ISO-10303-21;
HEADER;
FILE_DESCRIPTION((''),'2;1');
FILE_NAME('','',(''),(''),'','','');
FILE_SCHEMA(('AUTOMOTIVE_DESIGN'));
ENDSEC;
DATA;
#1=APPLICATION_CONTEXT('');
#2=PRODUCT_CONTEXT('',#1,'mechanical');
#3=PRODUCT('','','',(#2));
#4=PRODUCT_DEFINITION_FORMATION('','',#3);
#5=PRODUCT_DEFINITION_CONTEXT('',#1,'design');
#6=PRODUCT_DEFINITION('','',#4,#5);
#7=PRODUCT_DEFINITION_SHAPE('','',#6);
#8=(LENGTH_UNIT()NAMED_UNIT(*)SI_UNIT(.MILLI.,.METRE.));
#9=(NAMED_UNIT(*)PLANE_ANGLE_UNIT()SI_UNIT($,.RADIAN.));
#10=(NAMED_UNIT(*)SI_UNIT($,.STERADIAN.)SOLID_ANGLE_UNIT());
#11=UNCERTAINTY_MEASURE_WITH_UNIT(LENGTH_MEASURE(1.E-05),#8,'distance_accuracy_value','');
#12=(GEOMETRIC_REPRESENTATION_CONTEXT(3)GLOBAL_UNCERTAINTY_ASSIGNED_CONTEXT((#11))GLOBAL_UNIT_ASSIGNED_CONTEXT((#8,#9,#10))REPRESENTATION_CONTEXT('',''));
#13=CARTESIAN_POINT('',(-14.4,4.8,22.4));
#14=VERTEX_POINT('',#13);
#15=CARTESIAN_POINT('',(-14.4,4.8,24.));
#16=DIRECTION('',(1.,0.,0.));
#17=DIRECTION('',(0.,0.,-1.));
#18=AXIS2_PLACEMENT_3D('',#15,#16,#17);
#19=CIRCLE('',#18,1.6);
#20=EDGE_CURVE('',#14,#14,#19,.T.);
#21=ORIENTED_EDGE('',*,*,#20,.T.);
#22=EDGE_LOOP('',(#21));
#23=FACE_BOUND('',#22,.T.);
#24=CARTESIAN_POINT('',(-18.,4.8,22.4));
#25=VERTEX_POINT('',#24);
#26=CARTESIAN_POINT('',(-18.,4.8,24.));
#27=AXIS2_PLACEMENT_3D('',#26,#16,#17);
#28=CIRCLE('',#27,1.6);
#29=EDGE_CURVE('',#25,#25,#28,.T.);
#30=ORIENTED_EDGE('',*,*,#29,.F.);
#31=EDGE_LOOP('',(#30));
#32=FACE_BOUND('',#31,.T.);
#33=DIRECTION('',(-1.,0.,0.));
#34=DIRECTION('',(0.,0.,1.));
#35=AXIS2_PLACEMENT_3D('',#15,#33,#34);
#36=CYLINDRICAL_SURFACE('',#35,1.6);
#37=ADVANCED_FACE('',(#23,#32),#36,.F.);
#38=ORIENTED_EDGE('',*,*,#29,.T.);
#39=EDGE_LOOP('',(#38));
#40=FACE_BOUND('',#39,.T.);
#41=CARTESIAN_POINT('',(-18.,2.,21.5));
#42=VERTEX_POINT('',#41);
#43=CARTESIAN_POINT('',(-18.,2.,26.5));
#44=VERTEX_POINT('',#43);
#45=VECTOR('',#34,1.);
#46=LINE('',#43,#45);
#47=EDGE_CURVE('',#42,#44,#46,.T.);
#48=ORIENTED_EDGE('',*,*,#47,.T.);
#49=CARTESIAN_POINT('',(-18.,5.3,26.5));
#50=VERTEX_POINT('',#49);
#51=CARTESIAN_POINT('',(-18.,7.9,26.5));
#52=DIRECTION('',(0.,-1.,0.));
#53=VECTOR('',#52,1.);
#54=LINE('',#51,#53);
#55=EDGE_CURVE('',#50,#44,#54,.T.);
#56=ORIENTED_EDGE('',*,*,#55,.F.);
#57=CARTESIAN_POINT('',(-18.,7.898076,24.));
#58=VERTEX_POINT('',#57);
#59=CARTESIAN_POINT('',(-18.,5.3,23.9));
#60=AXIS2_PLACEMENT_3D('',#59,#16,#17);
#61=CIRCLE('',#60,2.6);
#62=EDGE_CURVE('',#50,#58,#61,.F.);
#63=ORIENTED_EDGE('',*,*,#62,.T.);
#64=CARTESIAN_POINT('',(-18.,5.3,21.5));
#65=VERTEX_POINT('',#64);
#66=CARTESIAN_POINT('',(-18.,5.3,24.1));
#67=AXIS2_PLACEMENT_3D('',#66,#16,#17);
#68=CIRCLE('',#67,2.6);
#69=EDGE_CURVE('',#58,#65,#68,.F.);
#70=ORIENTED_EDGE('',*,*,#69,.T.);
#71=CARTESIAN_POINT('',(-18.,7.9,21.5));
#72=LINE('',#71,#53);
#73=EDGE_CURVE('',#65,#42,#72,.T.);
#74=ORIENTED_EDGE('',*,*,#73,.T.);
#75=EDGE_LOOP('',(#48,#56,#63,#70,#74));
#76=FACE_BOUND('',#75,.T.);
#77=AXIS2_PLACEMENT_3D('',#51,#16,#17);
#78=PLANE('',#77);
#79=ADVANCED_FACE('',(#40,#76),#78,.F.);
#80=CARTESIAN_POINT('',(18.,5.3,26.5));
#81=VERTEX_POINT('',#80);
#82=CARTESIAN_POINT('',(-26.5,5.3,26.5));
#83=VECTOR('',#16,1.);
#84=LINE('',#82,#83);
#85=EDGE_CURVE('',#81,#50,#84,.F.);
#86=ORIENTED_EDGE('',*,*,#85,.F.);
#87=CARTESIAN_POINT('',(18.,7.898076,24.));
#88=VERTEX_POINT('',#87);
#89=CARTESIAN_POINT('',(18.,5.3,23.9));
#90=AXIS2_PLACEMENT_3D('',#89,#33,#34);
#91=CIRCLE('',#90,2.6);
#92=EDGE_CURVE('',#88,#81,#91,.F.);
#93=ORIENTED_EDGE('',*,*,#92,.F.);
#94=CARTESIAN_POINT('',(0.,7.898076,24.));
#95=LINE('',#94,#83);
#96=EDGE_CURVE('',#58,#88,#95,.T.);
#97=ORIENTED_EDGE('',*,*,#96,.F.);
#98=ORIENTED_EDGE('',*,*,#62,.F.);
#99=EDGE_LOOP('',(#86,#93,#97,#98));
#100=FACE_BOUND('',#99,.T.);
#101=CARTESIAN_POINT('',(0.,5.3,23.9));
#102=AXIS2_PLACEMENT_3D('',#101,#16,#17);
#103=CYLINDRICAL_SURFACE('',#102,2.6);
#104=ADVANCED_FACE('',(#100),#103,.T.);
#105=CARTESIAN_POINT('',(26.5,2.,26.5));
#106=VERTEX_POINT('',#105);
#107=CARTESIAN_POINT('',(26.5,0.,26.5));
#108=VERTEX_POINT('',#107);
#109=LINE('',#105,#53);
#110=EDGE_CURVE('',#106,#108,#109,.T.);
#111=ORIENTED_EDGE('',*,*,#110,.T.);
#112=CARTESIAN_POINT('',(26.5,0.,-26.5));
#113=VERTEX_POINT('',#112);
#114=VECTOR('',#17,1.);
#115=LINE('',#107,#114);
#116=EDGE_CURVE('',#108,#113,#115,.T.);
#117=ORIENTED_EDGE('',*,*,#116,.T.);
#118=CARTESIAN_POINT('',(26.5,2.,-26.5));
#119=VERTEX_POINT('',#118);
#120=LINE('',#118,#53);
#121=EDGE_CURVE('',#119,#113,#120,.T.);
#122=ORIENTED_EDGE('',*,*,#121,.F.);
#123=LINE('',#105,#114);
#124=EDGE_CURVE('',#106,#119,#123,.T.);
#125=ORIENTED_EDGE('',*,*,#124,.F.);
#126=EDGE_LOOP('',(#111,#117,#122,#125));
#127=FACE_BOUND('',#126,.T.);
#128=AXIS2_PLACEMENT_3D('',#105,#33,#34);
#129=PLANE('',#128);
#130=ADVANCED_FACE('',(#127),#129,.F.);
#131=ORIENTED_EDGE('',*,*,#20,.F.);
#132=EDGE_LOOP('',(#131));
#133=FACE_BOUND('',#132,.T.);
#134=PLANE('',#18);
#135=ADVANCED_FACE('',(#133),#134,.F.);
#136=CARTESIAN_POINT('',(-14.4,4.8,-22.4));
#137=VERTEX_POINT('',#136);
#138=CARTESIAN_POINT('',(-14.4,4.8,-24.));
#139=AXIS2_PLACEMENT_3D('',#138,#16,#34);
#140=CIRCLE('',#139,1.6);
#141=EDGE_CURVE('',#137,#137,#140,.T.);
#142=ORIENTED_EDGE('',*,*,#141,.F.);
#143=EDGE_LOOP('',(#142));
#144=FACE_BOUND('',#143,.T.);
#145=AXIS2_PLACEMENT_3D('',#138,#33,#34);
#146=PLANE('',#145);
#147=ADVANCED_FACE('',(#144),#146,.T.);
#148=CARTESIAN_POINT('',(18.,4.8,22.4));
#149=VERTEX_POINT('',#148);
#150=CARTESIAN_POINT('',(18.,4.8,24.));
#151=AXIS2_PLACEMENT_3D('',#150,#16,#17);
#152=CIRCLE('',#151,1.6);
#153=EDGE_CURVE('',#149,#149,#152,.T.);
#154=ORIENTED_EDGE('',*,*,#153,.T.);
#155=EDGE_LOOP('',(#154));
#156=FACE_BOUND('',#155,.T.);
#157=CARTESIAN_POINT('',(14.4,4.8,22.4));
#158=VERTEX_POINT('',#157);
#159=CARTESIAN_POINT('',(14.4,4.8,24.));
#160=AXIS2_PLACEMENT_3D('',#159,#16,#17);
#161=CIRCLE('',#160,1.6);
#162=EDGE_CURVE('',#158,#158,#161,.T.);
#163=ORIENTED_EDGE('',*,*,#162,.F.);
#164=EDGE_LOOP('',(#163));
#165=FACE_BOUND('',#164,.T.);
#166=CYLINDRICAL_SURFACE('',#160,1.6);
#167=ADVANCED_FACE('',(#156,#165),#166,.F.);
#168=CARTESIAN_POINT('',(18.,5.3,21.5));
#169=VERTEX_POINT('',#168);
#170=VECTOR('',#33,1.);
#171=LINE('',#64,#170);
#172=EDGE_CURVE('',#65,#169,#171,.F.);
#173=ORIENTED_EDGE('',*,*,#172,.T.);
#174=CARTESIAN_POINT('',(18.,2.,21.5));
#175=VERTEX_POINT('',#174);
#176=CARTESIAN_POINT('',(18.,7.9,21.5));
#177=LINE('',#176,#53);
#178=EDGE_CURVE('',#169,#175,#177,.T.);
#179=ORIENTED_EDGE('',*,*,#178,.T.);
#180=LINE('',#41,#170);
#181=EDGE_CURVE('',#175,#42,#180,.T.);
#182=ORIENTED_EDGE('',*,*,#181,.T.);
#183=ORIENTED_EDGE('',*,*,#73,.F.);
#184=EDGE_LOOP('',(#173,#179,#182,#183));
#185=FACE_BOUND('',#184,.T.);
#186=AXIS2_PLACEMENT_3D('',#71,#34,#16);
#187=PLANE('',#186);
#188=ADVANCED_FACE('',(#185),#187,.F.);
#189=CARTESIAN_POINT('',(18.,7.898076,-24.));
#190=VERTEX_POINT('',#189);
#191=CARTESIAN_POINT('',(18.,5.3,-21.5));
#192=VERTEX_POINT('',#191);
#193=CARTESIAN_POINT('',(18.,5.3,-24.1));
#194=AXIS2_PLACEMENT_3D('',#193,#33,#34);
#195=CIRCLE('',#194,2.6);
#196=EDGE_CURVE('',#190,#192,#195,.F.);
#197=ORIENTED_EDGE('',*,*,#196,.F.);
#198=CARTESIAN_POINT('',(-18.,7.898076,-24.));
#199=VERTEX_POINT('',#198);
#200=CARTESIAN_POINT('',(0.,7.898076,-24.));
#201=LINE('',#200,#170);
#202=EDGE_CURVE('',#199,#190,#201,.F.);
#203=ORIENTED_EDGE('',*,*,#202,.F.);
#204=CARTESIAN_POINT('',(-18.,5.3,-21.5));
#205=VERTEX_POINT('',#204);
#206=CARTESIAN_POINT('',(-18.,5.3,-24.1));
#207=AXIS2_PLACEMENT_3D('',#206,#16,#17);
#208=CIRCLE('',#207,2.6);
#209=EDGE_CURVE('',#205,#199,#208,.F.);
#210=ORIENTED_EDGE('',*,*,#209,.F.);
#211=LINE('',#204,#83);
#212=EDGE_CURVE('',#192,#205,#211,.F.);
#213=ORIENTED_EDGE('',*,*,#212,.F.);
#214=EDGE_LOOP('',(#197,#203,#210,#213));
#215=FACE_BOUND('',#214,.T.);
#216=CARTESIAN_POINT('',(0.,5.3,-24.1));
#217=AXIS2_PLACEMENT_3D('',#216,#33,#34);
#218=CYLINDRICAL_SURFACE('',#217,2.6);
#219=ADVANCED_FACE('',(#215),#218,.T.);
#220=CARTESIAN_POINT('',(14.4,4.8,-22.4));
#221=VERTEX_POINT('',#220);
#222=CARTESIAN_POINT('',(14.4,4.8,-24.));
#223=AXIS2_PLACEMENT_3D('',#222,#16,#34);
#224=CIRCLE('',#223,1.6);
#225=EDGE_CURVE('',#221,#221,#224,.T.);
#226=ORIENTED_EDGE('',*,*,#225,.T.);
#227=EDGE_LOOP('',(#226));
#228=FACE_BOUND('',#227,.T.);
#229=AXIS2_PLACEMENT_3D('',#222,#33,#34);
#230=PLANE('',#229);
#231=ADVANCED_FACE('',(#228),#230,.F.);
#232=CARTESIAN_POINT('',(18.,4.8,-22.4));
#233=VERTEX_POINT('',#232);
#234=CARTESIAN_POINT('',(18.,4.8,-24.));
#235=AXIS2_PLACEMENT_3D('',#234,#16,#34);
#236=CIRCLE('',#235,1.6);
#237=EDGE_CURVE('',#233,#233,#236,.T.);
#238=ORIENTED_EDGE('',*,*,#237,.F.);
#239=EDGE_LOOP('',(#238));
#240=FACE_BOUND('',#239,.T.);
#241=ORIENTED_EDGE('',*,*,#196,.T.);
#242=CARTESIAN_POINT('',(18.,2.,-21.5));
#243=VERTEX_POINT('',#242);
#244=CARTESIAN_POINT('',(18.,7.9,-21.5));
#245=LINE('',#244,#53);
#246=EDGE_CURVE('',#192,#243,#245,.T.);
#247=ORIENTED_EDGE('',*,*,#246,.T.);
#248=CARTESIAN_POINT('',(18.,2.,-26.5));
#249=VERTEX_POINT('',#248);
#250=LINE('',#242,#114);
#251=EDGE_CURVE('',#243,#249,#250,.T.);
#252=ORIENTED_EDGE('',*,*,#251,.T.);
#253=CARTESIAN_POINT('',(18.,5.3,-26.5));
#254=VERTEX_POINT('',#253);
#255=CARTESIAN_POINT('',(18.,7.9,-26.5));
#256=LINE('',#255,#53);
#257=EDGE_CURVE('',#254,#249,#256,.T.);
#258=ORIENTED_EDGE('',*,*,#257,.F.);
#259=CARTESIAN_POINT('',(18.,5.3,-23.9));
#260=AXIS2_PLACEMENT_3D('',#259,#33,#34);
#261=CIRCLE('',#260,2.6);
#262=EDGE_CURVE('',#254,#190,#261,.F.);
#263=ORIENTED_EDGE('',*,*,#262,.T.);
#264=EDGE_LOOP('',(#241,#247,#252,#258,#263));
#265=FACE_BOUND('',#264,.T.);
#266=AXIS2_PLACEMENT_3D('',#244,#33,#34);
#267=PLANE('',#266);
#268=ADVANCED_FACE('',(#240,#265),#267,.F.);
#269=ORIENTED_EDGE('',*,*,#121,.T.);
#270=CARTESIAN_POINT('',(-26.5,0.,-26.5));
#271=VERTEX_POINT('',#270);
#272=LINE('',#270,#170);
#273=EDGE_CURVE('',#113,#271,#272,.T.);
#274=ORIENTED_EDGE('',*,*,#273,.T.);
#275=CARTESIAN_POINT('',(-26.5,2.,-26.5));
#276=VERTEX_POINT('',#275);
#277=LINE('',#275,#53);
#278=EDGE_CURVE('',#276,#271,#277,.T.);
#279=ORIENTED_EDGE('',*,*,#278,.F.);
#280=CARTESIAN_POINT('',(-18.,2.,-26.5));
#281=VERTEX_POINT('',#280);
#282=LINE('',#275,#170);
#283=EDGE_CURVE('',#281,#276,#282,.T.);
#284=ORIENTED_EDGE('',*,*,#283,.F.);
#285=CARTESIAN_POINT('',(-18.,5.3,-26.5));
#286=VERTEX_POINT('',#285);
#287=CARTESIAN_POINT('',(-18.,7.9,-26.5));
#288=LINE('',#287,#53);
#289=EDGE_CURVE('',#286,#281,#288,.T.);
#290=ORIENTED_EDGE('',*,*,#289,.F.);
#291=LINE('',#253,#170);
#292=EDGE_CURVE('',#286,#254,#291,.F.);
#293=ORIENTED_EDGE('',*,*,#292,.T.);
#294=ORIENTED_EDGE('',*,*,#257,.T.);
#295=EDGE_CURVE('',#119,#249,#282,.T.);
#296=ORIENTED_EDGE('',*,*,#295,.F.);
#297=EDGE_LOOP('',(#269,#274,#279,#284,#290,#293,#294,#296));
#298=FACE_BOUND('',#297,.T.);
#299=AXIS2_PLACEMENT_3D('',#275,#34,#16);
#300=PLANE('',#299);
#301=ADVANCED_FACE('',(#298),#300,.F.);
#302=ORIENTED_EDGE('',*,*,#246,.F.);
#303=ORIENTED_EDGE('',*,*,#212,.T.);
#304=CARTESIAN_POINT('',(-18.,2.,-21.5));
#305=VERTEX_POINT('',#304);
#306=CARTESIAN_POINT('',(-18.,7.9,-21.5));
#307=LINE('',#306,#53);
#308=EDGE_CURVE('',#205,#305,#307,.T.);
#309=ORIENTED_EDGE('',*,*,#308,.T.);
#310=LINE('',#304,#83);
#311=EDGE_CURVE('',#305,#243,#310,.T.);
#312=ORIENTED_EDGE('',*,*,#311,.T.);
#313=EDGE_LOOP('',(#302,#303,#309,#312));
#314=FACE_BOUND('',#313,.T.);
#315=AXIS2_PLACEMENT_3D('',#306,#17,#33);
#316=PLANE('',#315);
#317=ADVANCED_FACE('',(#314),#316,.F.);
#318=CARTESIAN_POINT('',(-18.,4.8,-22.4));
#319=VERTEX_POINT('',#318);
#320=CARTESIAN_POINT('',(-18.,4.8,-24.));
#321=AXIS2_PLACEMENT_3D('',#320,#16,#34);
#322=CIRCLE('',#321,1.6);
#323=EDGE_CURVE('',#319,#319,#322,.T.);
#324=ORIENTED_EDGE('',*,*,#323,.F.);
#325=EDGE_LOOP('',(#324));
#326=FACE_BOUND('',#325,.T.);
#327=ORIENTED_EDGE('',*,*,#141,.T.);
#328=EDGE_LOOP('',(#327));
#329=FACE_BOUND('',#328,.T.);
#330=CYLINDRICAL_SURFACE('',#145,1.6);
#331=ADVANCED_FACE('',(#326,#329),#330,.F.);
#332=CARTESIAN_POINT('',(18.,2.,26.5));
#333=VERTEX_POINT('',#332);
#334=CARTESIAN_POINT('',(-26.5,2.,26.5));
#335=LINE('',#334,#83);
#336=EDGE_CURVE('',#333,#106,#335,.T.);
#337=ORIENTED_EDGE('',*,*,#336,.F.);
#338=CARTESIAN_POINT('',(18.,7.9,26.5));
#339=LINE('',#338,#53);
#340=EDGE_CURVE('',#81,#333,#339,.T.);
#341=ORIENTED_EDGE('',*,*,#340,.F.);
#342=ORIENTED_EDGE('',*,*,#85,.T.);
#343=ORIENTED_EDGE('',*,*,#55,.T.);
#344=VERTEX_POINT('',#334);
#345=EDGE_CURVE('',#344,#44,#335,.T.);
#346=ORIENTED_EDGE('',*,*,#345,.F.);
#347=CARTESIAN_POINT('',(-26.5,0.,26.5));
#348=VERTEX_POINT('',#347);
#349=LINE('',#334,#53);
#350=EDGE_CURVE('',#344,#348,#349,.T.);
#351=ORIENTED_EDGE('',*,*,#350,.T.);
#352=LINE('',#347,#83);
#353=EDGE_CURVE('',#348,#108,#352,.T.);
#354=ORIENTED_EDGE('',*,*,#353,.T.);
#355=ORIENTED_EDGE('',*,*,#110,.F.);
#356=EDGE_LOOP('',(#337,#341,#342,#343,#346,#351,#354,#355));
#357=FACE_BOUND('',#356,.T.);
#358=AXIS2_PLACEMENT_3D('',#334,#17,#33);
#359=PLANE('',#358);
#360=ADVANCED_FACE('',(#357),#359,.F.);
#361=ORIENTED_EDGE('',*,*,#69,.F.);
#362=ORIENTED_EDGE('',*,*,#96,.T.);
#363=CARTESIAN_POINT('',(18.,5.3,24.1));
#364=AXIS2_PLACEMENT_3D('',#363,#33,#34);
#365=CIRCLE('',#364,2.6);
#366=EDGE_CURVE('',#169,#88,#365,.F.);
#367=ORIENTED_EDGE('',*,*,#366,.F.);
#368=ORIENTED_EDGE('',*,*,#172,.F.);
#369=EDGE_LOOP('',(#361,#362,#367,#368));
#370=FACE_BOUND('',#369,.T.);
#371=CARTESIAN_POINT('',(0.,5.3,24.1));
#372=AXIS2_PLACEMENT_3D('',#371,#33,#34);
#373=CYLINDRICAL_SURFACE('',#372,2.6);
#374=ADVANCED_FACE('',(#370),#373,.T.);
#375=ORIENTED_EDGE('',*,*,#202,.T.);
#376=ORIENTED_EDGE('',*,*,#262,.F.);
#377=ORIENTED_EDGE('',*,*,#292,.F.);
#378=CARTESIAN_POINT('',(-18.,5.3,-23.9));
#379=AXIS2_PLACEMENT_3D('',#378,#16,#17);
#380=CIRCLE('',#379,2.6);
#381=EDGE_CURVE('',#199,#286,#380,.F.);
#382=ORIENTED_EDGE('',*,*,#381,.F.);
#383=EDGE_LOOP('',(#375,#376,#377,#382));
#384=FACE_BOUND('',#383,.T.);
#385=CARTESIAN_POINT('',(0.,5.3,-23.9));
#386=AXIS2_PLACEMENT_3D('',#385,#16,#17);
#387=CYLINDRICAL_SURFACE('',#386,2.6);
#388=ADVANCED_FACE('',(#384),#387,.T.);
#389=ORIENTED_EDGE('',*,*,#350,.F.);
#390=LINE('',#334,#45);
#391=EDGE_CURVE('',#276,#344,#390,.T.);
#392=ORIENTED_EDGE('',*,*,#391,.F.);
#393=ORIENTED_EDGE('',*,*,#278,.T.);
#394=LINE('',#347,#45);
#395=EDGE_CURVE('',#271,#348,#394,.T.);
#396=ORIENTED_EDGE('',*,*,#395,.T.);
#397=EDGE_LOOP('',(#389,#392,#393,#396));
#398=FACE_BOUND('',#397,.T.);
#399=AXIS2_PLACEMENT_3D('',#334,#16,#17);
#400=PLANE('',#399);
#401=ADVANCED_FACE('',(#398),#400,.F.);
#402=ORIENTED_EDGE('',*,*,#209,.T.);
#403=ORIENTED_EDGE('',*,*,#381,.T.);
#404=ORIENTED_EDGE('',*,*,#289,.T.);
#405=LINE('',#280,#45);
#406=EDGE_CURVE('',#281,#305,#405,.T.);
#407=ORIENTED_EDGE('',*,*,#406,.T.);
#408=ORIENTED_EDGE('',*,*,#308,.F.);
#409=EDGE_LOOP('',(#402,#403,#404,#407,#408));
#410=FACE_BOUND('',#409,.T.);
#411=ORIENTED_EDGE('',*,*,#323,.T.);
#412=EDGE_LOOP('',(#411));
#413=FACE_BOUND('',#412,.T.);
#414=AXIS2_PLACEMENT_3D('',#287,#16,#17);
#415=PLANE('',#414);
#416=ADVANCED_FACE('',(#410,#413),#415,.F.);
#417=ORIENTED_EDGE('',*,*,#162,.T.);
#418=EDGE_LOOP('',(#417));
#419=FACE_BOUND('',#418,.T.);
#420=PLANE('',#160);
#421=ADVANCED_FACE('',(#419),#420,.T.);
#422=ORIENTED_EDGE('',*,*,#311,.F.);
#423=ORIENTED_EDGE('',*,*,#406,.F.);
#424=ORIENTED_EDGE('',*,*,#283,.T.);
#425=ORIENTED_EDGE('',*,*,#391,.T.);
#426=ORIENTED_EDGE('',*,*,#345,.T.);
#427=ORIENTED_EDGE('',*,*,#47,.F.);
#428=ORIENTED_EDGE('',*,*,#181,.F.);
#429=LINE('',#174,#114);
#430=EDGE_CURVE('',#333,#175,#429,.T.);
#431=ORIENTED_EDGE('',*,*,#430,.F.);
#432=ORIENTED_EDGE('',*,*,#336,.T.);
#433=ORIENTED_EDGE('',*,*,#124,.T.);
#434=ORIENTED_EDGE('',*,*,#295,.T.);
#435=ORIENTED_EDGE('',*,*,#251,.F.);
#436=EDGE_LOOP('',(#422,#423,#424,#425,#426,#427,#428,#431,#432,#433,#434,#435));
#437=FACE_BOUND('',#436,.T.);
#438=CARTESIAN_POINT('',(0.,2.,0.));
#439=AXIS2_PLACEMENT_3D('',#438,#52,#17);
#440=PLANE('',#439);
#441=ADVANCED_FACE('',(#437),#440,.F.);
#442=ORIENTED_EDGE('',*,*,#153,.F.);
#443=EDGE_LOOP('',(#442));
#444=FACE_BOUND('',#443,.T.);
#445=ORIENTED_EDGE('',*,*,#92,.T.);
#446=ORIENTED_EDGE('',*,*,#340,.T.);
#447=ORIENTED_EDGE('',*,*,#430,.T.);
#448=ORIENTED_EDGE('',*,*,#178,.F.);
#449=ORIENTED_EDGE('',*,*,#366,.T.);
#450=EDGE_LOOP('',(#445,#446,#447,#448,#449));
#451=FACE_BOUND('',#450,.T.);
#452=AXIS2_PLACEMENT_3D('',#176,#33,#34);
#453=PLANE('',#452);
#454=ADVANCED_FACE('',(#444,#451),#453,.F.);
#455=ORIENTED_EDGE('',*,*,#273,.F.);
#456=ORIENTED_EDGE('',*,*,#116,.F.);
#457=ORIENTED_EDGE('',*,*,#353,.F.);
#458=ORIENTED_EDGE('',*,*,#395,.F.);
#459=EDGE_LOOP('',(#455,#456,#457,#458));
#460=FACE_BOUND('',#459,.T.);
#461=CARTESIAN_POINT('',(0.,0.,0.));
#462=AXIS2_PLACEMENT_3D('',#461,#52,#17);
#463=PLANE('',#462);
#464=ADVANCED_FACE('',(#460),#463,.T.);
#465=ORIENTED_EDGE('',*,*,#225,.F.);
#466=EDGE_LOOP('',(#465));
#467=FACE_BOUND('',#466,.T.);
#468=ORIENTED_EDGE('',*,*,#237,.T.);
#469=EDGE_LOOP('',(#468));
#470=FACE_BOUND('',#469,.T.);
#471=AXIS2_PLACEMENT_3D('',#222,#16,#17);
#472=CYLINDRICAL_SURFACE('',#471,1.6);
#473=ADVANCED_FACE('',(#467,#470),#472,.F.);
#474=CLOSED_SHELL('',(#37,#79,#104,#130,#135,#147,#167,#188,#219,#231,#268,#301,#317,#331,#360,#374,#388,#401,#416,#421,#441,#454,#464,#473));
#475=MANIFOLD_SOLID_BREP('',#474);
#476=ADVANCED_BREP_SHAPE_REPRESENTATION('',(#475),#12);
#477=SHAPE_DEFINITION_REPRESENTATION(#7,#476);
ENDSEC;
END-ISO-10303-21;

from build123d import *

# Parameters (mm, degrees)
SKETCH1_W           = 53
SKETCH1_H           = 53
BOSS_EXTRUDE1_DEPTH = 2
SKETCH2_W           = 36
SKETCH2_H           = 5
BOSS_EXTRUDE2_DEPTH = 5.9
SKETCH3_R           = 1.6
CUT_EXTRUDE1_DEPTH  = 3.6
CUT_EXTRUDE2_START  = 3.6
SKETCH4_R           = 1.6
CUT_EXTRUDE2_DEPTH  = 3.6
FILLET1_R           = 2.6


with BuildPart() as part:
    # Sketch1 → Boss-Extrude1 (new body)
    with BuildSketch(Plane(origin=(0, 0, 0), x_dir=(1, 0, 0), z_dir=(0, 1, 0))):
        Rectangle(SKETCH1_W, SKETCH1_H)
    extrude(amount=BOSS_EXTRUDE1_DEPTH)

    # Sketch2 → Boss-Extrude2 (add)
    with BuildSketch(Plane(origin=(0, 2, 0), x_dir=(1, 0, 0), z_dir=(0, 1, 0))):
        with Locations((0, 24)):
            Rectangle(SKETCH2_W, SKETCH2_H)
        with Locations((0, -24)):
            Rectangle(SKETCH2_W, SKETCH2_H)
    extrude(amount=BOSS_EXTRUDE2_DEPTH)

    # Sketch3 → Cut-Extrude1 (cut)
    with BuildSketch(Plane(origin=(18, 0, 0), x_dir=(0, 0, -1), z_dir=(1, 0, 0))):
        with Locations((-24, 4.8)):
            Circle(SKETCH3_R)
        with Locations(Location((24, 4.8, 0), (0, 0, 180))):
            Circle(SKETCH3_R)
    extrude(amount=-CUT_EXTRUDE1_DEPTH, mode=Mode.SUBTRACT)

    # Sketch4 → Cut-Extrude2 (cut)
    with BuildSketch(Plane(origin=(-18, 0, -18), x_dir=(0, 0, -1), z_dir=(1, 0, 0)).offset(CUT_EXTRUDE2_START)):
        with Locations((-42, 4.8)):
            Circle(SKETCH4_R)
        with Locations(Location((6, 4.8, 0), (0, 0, 180))):
            Circle(SKETCH4_R)
    extrude(amount=-CUT_EXTRUDE2_DEPTH, mode=Mode.SUBTRACT)

    # Fillet1
    # the kernel refuses this fillet: 2.6 mm, written as the material it takes off along each edge
    with BuildSketch(Plane(origin=(-24.5, 7.9, -26.5), x_dir=(0, -1, 0), z_dir=(1, 0, 0)), Plane(origin=(24.5, 7.9, -21.5), x_dir=(0, -1, 0), z_dir=(-1, 0, 0)), Plane(origin=(24.5, 7.9, 26.5), x_dir=(0, -1, 0), z_dir=(-1, 0, 0))) as fillet1_piece_1:
        with BuildLine():
            CenterArc((FILLET1_R, -FILLET1_R), FILLET1_R, 90, 90)
            Line((0, -FILLET1_R), (0, 0))
            Line((0, 0), (FILLET1_R, 0))
        make_face()
    extrude(amount=49, mode=Mode.SUBTRACT)
    with BuildSketch(Plane(origin=(-24.5, 7.9, 21.5), x_dir=(0, 0, 1), z_dir=(1, 0, 0))) as fillet1_piece_2:
        with BuildLine():
            CenterArc((FILLET1_R, FILLET1_R), FILLET1_R, 180, 90)
            Line((0, FILLET1_R), (0, 0))
            Line((0, 0), (FILLET1_R, 0))
        make_face()
    extrude(amount=49, mode=Mode.SUBTRACT)


solid = part.part
